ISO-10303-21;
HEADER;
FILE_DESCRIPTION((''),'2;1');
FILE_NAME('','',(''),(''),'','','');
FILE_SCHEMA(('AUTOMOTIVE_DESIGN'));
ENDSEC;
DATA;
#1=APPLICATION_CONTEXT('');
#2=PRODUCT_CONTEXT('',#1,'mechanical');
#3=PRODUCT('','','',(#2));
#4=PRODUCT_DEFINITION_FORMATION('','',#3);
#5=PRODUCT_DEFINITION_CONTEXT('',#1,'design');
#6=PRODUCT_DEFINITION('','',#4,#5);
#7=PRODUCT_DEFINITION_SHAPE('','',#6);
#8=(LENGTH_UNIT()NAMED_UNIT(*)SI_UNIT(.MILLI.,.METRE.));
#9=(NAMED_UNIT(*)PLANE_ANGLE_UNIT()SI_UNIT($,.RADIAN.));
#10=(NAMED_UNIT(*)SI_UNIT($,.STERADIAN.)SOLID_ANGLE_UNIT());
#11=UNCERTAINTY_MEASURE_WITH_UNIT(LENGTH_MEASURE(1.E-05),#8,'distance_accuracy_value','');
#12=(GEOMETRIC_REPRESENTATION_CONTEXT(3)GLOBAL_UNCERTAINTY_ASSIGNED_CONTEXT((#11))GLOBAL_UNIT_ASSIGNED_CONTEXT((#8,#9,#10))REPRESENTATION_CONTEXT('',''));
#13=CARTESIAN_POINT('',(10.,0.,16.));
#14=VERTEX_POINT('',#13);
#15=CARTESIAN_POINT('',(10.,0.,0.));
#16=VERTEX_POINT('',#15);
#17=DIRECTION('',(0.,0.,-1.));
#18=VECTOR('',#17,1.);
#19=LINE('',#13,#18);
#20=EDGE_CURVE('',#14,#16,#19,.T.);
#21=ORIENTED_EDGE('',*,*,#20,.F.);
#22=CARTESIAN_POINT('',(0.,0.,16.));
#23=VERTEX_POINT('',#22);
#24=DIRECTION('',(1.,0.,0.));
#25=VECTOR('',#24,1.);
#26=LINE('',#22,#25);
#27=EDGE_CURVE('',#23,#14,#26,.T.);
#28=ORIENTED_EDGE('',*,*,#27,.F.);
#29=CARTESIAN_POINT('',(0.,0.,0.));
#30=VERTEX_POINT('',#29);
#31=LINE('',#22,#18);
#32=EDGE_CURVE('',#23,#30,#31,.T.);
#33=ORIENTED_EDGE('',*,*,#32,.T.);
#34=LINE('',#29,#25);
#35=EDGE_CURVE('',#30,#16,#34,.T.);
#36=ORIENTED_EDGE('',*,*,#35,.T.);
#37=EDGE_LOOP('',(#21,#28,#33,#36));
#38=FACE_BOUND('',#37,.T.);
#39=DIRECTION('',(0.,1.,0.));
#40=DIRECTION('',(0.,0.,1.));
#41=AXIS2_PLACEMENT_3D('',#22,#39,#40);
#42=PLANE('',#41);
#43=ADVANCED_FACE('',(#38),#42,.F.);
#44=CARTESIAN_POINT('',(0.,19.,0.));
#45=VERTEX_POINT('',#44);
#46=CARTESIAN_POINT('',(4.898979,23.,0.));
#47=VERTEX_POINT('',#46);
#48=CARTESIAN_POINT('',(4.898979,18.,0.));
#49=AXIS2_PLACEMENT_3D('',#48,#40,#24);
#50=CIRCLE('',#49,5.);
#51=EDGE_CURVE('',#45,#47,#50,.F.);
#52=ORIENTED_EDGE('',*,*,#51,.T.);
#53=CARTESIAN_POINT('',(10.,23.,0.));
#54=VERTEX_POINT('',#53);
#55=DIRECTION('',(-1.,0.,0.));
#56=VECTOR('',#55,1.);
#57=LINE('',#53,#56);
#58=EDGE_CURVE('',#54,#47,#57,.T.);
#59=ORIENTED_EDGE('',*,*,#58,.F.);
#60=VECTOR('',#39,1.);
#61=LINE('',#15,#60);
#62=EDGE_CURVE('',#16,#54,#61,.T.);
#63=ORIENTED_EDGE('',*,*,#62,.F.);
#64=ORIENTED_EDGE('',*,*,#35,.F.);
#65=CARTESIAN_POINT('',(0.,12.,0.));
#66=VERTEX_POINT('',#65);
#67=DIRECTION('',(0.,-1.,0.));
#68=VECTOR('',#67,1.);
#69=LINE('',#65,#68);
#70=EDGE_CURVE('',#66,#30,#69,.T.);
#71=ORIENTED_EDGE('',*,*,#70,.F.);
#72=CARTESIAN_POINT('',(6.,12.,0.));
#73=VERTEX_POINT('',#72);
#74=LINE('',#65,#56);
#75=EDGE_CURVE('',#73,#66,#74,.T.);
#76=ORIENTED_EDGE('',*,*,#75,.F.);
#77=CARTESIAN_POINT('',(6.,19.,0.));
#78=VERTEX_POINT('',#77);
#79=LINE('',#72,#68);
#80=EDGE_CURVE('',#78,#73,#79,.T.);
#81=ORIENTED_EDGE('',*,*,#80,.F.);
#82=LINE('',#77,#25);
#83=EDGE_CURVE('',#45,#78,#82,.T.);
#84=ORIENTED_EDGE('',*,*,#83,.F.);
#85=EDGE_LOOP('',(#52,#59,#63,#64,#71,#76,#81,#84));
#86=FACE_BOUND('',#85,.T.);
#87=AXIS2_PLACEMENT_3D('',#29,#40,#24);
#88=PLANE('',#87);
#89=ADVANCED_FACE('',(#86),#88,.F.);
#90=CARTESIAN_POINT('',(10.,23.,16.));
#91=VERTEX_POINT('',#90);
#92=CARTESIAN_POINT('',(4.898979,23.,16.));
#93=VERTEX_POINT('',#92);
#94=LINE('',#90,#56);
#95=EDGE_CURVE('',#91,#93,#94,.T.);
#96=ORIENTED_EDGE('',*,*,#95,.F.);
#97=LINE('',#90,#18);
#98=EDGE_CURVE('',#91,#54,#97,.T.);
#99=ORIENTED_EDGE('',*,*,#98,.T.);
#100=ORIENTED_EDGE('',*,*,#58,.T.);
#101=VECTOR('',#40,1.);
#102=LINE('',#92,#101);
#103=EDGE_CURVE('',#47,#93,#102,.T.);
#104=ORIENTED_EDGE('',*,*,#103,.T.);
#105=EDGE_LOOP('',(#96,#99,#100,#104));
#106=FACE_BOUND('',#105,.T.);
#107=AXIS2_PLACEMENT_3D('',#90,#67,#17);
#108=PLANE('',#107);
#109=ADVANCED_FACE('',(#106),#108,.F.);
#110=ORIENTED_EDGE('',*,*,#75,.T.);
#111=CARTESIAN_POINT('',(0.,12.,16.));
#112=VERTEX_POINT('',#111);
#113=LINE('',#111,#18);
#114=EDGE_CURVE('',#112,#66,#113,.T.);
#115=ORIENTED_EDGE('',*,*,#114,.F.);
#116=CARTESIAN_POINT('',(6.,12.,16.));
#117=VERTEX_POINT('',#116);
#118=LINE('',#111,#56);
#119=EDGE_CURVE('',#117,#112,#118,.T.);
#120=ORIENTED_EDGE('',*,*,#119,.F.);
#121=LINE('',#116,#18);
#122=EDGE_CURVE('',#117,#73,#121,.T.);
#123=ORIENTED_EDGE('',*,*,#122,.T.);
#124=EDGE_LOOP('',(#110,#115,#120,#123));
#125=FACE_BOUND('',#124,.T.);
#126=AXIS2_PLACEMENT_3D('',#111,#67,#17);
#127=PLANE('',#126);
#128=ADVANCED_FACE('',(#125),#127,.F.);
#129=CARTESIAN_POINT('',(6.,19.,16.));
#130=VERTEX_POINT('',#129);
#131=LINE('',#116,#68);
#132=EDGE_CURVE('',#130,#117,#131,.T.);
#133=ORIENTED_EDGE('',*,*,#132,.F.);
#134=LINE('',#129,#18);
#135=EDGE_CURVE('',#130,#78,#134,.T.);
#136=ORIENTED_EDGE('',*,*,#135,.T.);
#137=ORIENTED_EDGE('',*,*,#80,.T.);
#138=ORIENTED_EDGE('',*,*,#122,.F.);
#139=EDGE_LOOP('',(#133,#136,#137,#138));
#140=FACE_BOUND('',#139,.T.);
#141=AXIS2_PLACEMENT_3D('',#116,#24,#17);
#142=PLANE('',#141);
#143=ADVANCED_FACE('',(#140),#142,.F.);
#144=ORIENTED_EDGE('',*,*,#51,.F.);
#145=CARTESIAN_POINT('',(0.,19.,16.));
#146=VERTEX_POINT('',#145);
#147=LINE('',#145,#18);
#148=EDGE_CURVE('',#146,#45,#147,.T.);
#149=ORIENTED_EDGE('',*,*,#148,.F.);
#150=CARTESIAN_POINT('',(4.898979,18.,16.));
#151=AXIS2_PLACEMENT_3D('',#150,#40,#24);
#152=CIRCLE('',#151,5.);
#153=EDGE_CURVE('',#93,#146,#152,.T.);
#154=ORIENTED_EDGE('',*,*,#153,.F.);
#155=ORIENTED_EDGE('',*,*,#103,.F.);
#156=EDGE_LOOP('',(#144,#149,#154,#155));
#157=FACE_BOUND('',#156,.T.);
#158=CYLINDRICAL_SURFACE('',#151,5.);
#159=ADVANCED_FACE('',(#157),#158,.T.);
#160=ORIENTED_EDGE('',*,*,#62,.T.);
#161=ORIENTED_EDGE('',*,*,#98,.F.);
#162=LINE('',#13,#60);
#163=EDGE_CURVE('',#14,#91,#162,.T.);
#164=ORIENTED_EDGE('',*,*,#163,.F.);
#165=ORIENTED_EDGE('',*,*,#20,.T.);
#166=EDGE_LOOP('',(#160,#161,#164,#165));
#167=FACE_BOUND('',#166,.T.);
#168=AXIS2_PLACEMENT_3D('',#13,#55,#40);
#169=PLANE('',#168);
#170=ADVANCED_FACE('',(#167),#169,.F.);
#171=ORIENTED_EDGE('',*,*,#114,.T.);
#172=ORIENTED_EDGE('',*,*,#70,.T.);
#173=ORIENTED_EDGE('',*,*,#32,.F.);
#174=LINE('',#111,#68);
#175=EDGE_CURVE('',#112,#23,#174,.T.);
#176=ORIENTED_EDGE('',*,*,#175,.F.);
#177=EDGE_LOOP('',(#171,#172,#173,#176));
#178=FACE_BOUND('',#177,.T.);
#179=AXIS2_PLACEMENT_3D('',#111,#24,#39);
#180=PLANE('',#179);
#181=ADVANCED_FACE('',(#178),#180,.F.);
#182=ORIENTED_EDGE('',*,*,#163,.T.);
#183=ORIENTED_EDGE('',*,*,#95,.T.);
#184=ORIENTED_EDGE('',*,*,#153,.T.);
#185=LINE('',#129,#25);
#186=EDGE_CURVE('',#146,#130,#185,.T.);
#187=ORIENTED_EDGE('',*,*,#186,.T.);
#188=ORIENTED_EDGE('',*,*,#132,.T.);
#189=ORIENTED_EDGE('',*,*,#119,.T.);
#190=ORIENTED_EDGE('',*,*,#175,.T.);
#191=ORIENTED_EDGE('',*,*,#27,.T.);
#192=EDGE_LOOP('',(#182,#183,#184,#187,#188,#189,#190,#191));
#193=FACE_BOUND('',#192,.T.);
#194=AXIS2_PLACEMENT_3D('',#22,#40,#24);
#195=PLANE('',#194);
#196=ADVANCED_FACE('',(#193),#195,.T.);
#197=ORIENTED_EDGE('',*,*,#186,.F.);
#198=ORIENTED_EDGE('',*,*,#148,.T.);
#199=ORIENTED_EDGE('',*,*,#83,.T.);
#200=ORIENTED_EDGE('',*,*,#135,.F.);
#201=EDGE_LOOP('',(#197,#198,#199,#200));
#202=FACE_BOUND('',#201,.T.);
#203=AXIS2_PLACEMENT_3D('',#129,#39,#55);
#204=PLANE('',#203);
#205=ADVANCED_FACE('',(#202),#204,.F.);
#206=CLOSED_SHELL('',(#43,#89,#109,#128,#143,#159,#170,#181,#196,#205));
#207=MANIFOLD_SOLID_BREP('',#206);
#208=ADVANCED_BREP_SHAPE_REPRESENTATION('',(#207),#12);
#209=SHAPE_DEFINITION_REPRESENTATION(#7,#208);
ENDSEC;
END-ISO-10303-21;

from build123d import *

# Parameters (mm, degrees)
BOSS_EXTRUDE1_DEPTH = 16
FILLET1_R           = 5


with BuildPart() as part:
    # Sketch1 → Boss-Extrude1 (new body)
    with BuildSketch(Plane.XY):
        Polygon((0, 0), (10, 0), (10, 23), (0, 23), (0, 19), (6, 19), (6, 12), (0, 12), align=None)
    extrude(amount=BOSS_EXTRUDE1_DEPTH)

    # Fillet1
    # the kernel refuses this fillet: 5 mm, written as the material it takes off along each edge
    with BuildSketch(Plane(origin=(0, 23, -12.247448714), x_dir=(1, 0, 0), z_dir=(0, 0, 1))) as fillet1_piece_1:
        with BuildLine():
            CenterArc((4.898979486, -5), FILLET1_R, 90, 78.463040967)
            Line((0, -4), (-0.09797959, -3.98))
            ThreePointArc((-0.09797959, -3.98), (-0.1, -2), (-0.1, 0))
            Line((-0.1, 0), (0, 0.1))
            Line((0, 0.1), (4.898979486, 0.1))
            Line((4.898979486, 0.1), (4.898979486, 0))
        make_face()
    extrude(amount=40.494897428, mode=Mode.SUBTRACT)


solid = part.part
